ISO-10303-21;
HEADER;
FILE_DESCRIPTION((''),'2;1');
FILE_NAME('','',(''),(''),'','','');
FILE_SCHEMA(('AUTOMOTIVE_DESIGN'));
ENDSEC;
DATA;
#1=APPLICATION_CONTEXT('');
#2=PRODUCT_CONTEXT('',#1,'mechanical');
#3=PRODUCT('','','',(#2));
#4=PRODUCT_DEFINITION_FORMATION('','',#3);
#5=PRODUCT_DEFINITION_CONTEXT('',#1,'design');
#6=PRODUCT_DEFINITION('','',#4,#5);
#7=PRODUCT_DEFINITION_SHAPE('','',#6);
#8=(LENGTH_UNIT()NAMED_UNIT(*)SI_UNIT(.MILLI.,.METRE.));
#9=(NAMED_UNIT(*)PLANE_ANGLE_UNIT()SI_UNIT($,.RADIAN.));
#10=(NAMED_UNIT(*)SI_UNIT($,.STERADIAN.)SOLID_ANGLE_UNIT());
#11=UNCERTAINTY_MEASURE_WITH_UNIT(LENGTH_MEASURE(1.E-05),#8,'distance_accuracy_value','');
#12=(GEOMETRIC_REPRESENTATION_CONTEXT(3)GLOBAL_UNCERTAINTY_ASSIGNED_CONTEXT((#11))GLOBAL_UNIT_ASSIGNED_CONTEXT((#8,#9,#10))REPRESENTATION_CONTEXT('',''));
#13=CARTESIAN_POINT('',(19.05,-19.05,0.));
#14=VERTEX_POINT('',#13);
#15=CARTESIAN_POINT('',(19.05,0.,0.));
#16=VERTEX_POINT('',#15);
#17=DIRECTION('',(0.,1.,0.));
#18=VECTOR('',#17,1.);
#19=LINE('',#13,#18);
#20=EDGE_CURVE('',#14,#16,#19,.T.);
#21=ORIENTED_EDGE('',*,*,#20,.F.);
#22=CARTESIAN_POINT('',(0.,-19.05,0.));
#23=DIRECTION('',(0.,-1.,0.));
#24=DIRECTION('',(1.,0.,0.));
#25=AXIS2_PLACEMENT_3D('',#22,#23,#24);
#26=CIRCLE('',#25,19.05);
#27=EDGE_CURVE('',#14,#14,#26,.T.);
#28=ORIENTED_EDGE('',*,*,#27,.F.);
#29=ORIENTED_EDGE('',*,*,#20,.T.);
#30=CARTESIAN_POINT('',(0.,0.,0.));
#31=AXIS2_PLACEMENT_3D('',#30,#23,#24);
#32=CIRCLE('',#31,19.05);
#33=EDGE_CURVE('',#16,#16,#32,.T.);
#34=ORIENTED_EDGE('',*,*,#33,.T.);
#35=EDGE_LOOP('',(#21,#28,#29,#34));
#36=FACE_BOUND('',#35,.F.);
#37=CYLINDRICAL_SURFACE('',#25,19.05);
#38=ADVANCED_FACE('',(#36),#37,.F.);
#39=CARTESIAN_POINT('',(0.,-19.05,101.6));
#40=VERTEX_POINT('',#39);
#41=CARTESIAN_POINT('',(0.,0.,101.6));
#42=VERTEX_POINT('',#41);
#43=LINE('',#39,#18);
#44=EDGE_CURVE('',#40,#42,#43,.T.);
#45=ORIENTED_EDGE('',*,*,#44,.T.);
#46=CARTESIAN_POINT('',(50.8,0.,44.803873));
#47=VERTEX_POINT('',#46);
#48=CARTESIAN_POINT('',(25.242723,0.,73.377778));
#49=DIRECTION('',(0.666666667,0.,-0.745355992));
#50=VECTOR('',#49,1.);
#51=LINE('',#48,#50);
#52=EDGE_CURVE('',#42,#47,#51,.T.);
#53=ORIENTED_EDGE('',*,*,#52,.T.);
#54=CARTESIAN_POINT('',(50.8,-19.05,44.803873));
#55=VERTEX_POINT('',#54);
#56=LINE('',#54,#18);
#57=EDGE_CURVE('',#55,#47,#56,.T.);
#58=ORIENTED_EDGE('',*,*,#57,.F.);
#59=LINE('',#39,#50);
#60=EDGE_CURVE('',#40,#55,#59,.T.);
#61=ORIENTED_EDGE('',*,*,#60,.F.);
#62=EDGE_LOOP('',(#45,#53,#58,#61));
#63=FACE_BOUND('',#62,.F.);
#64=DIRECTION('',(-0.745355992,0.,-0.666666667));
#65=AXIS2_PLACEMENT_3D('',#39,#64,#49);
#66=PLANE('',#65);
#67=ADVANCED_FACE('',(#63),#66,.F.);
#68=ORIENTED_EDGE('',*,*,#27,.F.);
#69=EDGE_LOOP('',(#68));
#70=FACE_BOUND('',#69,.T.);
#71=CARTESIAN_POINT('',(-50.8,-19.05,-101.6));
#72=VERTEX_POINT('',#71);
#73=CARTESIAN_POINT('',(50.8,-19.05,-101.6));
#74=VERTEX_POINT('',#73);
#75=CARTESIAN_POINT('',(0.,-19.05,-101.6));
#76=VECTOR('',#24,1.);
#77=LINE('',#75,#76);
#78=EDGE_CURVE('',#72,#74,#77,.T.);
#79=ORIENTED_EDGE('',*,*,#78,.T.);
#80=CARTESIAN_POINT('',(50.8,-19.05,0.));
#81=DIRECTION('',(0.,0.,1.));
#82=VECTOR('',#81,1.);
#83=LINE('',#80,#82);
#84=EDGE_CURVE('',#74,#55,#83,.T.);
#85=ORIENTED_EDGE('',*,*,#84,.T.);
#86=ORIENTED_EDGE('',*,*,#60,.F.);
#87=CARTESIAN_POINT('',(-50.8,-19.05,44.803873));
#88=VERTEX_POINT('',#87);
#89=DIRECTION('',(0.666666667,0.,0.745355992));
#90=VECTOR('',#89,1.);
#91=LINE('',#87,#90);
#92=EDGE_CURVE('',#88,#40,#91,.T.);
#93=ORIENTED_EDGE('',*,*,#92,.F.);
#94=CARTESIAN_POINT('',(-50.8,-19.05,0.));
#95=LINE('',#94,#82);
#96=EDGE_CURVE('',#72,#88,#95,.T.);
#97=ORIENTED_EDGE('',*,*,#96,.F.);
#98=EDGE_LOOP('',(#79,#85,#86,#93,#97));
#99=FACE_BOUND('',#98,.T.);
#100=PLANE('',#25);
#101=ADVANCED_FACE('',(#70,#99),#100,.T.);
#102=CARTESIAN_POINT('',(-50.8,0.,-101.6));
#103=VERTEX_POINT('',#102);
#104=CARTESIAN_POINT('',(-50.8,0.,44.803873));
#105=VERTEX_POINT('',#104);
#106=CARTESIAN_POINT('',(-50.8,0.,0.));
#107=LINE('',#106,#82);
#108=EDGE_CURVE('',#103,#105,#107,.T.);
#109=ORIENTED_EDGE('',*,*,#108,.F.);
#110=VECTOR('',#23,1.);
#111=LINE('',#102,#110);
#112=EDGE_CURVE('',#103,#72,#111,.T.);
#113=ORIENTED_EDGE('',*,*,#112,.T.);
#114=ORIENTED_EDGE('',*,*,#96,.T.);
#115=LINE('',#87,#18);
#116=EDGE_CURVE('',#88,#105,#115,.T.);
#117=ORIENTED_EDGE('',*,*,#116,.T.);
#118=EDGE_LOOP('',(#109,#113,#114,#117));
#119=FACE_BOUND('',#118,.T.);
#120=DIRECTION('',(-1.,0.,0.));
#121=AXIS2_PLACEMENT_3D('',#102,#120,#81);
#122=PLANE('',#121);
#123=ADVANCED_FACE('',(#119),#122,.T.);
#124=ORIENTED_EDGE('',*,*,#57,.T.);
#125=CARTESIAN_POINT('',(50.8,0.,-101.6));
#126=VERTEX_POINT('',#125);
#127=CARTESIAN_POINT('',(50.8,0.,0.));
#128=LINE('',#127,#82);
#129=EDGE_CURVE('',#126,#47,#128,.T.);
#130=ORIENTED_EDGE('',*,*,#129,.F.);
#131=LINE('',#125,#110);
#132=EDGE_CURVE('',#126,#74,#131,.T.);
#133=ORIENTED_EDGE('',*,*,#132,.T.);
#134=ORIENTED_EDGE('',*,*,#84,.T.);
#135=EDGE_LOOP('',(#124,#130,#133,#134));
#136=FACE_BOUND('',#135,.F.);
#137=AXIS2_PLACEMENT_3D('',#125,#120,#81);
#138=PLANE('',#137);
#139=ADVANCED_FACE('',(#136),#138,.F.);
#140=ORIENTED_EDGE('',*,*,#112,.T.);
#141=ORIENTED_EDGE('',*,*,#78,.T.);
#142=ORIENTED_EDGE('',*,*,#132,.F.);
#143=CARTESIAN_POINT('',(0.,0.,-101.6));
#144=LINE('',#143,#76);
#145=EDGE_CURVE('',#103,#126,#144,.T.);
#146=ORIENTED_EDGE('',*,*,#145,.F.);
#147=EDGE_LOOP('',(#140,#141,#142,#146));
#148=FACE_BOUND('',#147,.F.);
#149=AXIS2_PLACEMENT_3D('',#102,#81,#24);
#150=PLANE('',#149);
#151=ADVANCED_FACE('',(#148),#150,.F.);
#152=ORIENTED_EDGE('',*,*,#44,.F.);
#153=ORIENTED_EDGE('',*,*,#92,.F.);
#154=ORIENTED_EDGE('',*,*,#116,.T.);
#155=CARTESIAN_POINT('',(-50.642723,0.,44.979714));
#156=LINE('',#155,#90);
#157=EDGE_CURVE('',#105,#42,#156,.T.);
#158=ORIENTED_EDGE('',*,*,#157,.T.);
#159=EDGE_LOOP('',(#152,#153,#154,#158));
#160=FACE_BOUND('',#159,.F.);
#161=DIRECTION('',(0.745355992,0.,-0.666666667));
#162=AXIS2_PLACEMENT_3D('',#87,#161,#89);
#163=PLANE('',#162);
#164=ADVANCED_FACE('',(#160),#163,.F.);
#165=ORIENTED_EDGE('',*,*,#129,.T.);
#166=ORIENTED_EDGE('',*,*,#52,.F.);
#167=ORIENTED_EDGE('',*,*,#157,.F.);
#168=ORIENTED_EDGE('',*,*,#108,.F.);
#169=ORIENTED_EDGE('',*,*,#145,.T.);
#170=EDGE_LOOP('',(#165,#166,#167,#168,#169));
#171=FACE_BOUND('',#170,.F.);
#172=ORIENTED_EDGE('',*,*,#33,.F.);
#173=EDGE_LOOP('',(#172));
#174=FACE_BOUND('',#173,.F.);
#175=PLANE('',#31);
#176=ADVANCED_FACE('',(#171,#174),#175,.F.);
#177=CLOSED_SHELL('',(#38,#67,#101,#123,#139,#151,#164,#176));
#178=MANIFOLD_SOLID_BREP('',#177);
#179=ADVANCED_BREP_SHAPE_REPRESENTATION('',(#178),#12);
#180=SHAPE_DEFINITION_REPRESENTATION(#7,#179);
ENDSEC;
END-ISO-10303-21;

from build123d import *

# Parameters (mm, degrees)
F0_W     = 101.6
F0_H     = 203.2
F1_DEPTH = 19.05
F3_DEPTH = 19.051
F4_R     = 19.05
F5_DEPTH = 19.051


# Not quite as in the source:
# - a feature names something its author has since deleted; it is built from what else it names


with BuildPart() as f1:
    # F0 (on Front) → F1 (new body)
    with BuildSketch(Plane.XZ):
        Rectangle(F0_W, F0_H)
    extrude(amount=F1_DEPTH)

    # F2 (on face) → F3 (cut, through all)
    with BuildSketch(Plane.XZ.offset(19.05)):
        Polygon((-50.8, 44.8038733715), (0, 101.6), (-50.8, 101.6), align=None)
        Polygon((50.8, 101.6), (0, 101.6), (50.8, 44.8038733715), align=None)
    extrude(amount=-F3_DEPTH, mode=Mode.SUBTRACT)

    # F4 (on face) → F5 (cut, through all)
    with BuildSketch(Plane.XZ.offset(19.05)):
        Circle(F4_R)
    extrude(amount=-F5_DEPTH, mode=Mode.SUBTRACT)


solid = f1.part
